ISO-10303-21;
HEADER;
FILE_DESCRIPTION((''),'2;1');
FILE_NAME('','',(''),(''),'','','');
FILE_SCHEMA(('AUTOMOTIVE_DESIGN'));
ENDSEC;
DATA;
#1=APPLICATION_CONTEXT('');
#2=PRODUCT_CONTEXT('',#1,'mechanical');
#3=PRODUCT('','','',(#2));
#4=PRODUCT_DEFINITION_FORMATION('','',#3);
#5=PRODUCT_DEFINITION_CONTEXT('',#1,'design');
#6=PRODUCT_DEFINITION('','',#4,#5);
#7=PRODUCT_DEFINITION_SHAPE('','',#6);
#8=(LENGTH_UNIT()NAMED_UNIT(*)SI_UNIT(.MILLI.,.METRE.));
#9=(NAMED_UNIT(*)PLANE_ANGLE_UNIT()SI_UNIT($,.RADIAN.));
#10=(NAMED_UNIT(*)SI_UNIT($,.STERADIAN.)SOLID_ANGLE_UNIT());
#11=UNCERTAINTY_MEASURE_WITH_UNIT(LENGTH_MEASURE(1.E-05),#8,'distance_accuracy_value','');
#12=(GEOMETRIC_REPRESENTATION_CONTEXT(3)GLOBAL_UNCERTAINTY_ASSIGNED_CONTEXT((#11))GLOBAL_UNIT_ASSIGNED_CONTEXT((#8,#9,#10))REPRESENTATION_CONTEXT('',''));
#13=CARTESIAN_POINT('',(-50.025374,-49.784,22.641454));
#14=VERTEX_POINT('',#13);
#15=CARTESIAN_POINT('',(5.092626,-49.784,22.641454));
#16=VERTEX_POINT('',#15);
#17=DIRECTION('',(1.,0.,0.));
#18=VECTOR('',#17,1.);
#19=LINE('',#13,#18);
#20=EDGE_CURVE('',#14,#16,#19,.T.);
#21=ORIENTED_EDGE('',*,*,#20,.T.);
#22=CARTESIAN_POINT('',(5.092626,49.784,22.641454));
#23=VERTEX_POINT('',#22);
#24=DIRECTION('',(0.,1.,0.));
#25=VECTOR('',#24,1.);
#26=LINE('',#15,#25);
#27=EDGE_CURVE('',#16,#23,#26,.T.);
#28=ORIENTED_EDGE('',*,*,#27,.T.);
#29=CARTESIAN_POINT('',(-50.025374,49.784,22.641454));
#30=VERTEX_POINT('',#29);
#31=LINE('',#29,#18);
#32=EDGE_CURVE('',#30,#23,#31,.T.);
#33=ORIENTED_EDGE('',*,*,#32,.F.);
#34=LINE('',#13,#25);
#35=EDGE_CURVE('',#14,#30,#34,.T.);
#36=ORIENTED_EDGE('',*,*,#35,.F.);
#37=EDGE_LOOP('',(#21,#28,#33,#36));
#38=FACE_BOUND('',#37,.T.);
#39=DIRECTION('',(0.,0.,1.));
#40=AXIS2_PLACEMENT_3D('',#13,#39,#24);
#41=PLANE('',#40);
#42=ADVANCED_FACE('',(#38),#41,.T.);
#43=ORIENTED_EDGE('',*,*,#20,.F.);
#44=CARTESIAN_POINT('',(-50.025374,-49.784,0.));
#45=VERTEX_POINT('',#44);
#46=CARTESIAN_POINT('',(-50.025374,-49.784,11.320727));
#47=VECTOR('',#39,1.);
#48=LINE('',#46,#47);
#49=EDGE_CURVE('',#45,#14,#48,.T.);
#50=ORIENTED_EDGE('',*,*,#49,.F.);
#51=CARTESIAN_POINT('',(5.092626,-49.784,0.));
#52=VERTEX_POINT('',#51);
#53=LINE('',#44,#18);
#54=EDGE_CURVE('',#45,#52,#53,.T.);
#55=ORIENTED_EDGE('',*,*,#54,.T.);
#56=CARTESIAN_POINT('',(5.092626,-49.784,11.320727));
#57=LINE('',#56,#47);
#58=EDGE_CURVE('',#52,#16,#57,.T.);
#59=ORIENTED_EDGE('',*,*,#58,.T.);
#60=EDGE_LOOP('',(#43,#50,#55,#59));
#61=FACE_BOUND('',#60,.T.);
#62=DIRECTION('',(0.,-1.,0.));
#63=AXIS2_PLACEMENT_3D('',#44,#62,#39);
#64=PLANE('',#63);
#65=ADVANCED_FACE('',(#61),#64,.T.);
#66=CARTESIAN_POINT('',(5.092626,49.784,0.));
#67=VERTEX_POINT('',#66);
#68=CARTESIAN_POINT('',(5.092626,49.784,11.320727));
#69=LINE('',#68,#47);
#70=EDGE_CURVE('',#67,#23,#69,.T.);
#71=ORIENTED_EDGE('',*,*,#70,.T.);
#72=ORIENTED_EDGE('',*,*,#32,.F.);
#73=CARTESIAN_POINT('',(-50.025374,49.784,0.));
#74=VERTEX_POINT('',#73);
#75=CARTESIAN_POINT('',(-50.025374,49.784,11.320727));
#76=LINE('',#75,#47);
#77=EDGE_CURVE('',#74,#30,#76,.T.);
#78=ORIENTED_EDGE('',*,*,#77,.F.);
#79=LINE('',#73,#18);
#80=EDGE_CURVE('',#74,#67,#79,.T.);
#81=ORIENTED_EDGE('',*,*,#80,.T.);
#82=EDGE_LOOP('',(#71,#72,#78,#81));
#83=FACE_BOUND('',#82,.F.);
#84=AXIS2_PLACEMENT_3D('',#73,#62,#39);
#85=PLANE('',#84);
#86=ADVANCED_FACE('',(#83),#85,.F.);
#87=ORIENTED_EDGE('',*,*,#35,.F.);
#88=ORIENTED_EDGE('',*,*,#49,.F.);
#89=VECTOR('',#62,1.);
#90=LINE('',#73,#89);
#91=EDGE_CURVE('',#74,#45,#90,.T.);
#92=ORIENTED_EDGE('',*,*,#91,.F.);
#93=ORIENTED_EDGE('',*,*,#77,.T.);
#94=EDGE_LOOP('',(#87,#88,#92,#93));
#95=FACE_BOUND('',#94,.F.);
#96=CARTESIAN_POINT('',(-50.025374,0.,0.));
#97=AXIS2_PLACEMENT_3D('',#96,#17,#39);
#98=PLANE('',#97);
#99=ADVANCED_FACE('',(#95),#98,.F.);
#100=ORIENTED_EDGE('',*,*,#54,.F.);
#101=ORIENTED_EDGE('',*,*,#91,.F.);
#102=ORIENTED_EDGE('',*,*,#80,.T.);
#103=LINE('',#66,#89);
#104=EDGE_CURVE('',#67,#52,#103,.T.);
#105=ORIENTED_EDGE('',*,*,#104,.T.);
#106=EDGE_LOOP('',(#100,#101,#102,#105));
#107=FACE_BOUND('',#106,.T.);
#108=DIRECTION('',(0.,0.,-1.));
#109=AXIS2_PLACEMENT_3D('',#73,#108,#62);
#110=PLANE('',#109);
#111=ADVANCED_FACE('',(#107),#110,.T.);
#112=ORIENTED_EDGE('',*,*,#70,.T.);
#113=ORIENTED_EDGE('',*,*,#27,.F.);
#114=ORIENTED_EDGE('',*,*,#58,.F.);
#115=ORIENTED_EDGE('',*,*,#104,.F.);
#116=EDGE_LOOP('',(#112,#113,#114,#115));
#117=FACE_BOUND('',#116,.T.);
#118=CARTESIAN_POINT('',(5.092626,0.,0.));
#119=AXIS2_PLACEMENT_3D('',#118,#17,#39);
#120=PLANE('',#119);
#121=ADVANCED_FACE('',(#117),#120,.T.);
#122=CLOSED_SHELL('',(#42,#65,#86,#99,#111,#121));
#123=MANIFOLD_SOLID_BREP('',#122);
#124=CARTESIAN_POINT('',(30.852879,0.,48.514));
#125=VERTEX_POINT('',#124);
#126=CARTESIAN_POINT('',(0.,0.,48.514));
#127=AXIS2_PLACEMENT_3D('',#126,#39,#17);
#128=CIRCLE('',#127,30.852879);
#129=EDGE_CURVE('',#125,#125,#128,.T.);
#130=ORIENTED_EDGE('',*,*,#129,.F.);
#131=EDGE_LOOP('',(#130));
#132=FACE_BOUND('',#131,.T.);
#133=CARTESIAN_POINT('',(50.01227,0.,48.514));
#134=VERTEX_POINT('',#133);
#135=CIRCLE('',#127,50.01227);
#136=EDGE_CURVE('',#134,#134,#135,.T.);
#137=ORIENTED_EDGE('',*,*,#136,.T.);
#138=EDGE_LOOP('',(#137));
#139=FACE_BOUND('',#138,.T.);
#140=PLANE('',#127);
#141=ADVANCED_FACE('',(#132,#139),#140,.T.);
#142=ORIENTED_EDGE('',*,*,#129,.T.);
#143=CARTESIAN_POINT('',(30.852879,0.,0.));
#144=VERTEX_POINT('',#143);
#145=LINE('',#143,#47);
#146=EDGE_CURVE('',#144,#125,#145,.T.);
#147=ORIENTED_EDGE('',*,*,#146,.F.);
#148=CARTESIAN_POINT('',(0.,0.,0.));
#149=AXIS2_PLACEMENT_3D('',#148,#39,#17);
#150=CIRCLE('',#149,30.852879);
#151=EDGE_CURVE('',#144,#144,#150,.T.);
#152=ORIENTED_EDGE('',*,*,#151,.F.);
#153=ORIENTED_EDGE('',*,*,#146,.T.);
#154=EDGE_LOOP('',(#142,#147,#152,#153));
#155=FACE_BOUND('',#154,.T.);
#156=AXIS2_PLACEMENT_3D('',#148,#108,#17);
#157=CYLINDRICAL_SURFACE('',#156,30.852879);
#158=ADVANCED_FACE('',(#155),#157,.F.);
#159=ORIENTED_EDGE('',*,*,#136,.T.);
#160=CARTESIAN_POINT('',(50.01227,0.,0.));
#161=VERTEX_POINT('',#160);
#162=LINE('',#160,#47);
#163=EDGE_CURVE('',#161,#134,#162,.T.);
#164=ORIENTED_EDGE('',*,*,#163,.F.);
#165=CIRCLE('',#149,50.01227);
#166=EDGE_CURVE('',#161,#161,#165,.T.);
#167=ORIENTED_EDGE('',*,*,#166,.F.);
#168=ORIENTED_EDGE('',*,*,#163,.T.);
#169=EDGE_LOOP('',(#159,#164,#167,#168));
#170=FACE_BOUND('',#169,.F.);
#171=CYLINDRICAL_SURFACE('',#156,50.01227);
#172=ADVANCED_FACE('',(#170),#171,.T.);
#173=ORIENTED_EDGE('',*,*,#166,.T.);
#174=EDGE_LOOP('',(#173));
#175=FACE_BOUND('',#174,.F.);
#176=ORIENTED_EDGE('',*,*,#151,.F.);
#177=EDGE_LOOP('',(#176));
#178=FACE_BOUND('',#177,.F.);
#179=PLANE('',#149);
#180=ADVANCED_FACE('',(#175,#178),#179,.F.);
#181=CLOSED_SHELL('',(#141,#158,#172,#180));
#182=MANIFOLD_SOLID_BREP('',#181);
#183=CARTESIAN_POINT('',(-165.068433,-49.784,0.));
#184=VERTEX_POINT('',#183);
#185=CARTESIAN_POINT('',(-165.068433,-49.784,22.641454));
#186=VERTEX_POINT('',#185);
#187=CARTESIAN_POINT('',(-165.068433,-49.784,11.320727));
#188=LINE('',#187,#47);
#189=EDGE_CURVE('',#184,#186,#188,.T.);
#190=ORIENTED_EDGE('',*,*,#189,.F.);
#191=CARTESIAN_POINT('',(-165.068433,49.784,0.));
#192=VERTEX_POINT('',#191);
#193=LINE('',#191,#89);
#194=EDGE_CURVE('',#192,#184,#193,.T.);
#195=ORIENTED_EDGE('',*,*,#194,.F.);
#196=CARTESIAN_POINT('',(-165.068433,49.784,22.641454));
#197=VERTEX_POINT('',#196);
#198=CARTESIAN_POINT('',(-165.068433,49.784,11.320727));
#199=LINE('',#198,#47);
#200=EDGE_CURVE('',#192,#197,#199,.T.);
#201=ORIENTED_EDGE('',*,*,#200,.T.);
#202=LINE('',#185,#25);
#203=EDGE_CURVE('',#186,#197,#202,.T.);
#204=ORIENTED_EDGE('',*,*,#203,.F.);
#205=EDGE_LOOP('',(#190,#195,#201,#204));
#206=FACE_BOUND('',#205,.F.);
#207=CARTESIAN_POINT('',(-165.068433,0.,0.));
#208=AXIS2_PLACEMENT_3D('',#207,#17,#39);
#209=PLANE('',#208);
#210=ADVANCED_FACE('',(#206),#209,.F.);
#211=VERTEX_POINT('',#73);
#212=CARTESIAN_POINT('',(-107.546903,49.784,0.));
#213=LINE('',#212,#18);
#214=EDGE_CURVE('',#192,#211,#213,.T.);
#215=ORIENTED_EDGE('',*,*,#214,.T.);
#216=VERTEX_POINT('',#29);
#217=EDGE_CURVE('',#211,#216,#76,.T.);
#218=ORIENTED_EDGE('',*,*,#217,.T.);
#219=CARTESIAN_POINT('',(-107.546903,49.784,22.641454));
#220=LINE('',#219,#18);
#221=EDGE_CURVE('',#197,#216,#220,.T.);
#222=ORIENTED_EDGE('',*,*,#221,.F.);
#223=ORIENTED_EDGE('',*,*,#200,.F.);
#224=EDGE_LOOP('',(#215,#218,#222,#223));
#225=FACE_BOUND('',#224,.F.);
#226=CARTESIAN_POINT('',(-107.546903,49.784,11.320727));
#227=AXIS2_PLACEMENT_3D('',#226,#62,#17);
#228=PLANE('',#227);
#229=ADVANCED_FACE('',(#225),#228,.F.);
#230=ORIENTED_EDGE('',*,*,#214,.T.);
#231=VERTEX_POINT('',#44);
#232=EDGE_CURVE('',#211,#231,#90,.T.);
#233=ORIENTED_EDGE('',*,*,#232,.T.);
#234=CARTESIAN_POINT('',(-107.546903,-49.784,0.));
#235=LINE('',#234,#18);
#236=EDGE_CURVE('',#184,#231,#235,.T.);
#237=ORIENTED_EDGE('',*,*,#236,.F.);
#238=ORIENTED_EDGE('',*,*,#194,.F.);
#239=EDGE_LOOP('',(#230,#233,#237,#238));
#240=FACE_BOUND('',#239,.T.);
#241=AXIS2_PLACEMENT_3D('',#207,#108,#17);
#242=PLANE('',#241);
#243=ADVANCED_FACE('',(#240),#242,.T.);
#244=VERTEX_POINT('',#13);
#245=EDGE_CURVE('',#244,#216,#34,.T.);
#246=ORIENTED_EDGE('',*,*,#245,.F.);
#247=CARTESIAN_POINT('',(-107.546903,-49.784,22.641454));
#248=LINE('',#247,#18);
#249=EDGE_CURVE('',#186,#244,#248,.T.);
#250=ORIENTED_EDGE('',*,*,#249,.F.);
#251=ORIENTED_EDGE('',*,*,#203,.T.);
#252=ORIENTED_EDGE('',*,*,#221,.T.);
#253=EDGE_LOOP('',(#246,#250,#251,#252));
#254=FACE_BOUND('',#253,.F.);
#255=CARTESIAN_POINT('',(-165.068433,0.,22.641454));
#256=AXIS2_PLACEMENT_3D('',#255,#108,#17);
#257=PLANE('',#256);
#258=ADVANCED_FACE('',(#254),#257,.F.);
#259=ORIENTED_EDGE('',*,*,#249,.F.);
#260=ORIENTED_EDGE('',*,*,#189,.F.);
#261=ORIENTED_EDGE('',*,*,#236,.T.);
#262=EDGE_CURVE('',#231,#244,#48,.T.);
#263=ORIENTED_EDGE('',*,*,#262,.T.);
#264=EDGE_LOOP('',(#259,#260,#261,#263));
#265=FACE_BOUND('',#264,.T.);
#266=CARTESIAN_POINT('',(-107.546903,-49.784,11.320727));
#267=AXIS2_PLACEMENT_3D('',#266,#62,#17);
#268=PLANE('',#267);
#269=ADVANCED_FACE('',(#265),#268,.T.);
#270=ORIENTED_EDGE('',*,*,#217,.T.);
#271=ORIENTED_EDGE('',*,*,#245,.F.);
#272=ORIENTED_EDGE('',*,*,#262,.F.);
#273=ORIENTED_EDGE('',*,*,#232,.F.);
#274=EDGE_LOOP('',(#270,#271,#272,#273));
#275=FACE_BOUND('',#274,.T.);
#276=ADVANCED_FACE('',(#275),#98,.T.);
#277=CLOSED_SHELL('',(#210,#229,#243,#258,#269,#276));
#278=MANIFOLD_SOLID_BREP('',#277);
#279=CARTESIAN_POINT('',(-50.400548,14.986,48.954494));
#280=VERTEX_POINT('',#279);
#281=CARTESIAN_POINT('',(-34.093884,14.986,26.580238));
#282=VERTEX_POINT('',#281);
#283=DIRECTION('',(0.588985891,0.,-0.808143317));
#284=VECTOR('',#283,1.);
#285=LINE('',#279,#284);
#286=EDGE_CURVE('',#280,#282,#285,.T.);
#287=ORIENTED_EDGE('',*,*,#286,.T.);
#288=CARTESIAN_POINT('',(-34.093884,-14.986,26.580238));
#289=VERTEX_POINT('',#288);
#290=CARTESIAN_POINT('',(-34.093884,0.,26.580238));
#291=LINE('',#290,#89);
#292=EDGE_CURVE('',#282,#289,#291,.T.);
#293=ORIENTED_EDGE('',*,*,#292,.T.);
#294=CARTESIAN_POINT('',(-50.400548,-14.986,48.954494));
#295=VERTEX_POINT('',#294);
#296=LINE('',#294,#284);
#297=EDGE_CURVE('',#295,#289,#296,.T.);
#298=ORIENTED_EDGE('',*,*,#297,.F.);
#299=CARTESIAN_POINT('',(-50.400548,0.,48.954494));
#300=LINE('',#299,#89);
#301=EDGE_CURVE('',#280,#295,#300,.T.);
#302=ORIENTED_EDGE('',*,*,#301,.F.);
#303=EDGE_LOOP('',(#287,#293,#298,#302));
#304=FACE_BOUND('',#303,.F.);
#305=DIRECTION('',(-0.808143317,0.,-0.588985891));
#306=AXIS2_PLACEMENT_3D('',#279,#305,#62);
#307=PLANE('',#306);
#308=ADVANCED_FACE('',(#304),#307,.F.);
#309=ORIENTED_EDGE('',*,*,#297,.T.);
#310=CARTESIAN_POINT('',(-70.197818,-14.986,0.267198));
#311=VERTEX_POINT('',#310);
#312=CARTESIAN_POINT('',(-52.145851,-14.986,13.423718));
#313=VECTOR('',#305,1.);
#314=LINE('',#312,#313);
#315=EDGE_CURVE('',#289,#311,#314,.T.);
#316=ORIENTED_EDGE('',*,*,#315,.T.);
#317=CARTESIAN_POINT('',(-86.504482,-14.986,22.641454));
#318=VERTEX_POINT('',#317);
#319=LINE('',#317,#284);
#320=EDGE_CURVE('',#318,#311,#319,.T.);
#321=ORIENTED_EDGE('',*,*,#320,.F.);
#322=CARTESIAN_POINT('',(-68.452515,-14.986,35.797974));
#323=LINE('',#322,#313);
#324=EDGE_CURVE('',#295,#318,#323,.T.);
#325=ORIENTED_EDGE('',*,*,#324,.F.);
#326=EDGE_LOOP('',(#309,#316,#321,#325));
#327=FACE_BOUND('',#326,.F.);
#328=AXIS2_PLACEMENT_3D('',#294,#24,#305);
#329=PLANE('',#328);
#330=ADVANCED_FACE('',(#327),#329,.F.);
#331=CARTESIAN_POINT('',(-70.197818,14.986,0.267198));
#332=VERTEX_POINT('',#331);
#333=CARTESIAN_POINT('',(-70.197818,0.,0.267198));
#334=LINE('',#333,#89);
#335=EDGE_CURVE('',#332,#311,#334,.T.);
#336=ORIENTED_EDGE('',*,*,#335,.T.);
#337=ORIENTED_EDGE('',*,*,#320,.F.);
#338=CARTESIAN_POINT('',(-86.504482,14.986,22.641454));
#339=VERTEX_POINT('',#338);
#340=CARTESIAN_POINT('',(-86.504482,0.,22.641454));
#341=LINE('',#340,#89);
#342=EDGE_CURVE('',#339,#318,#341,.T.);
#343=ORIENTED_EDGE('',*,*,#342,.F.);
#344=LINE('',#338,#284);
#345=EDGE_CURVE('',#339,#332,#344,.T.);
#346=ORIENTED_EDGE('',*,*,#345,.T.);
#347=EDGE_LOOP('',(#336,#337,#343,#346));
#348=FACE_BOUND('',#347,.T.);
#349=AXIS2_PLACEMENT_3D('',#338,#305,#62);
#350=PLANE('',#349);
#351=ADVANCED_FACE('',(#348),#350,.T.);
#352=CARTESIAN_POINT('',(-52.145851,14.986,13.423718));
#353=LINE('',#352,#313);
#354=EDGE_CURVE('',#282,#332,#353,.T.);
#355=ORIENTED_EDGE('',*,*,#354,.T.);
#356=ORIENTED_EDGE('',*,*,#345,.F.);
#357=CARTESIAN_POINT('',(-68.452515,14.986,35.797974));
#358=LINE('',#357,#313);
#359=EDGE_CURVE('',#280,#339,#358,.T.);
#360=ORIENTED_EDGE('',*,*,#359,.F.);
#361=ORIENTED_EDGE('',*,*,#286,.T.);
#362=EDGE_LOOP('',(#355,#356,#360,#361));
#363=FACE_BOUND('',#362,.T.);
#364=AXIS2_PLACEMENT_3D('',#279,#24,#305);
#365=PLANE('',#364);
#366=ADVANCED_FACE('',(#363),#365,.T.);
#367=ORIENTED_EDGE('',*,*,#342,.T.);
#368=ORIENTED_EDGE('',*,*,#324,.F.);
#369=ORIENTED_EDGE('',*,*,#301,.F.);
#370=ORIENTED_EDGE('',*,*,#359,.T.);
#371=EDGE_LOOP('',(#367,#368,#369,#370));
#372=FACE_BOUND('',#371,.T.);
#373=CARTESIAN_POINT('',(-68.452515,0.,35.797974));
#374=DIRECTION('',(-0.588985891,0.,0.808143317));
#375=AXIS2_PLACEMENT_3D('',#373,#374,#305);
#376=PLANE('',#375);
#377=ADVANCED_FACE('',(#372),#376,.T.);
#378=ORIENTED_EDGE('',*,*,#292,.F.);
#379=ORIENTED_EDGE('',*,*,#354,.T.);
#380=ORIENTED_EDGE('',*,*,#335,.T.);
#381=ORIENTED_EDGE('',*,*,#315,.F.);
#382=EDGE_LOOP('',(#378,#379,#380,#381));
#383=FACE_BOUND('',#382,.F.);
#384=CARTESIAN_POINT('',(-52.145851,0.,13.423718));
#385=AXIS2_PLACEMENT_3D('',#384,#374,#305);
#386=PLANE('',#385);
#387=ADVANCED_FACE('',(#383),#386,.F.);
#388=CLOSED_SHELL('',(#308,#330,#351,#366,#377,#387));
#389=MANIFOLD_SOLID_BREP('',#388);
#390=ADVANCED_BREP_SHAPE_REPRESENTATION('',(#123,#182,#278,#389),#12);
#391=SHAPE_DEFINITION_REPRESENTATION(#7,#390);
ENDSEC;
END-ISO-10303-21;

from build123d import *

# Parameters (mm, degrees)
F0_R     = 50.0122703422
F0_R_2   = 30.8528794084
F1_DEPTH = 48.514
F2_W     = 115.0430589914
F2_H     = 22.641453892
F3_DEPTH = 49.784
F4_DEPTH = 55.118
F6_E3_W  = 44.6751625542
F6_E3_H  = 29.972
F7_DEPTH = 27.686


with BuildPart() as f1:
    # F0 (on Top) → F1 (new body)
    with BuildSketch(Plane.XY):
        Circle(F0_R)
        Circle(F0_R_2, mode=Mode.SUBTRACT)
    extrude(amount=F1_DEPTH)


with BuildPart() as f3:
    # F2 (on Front) → F3 (new body, symmetric)
    with BuildSketch(Plane.XZ):
        with Locations((-107.546903193, 11.320726946)):
            Rectangle(F2_W, F2_H)
    extrude(amount=F3_DEPTH, both=True)


with BuildPart() as f4:
    # F4 (new): a face of the model
    f4_faces = [f3.part.faces().sort_by_distance(p)[0] for p in [
        (-50.0253736973, 0, 11.320726946),
    ]]
    extrude(f4_faces, amount=F4_DEPTH)


with BuildPart() as f7:
    # F6_E3 (on explicit) → F7 (new body)
    with BuildSketch(Plane(origin=(-50.4005476832, 14.986, 48.9544942975), x_dir=(-0.8081433169, 0, -0.5889858906), z_dir=(-0.5889858906, 0, 0.8081433169))):
        with Locations((22.3375812771, 14.986)):
            Rectangle(F6_E3_W, F6_E3_H)
    extrude(amount=-F7_DEPTH)


solid = Compound([f1.part, f3.part, f4.part, f7.part])
